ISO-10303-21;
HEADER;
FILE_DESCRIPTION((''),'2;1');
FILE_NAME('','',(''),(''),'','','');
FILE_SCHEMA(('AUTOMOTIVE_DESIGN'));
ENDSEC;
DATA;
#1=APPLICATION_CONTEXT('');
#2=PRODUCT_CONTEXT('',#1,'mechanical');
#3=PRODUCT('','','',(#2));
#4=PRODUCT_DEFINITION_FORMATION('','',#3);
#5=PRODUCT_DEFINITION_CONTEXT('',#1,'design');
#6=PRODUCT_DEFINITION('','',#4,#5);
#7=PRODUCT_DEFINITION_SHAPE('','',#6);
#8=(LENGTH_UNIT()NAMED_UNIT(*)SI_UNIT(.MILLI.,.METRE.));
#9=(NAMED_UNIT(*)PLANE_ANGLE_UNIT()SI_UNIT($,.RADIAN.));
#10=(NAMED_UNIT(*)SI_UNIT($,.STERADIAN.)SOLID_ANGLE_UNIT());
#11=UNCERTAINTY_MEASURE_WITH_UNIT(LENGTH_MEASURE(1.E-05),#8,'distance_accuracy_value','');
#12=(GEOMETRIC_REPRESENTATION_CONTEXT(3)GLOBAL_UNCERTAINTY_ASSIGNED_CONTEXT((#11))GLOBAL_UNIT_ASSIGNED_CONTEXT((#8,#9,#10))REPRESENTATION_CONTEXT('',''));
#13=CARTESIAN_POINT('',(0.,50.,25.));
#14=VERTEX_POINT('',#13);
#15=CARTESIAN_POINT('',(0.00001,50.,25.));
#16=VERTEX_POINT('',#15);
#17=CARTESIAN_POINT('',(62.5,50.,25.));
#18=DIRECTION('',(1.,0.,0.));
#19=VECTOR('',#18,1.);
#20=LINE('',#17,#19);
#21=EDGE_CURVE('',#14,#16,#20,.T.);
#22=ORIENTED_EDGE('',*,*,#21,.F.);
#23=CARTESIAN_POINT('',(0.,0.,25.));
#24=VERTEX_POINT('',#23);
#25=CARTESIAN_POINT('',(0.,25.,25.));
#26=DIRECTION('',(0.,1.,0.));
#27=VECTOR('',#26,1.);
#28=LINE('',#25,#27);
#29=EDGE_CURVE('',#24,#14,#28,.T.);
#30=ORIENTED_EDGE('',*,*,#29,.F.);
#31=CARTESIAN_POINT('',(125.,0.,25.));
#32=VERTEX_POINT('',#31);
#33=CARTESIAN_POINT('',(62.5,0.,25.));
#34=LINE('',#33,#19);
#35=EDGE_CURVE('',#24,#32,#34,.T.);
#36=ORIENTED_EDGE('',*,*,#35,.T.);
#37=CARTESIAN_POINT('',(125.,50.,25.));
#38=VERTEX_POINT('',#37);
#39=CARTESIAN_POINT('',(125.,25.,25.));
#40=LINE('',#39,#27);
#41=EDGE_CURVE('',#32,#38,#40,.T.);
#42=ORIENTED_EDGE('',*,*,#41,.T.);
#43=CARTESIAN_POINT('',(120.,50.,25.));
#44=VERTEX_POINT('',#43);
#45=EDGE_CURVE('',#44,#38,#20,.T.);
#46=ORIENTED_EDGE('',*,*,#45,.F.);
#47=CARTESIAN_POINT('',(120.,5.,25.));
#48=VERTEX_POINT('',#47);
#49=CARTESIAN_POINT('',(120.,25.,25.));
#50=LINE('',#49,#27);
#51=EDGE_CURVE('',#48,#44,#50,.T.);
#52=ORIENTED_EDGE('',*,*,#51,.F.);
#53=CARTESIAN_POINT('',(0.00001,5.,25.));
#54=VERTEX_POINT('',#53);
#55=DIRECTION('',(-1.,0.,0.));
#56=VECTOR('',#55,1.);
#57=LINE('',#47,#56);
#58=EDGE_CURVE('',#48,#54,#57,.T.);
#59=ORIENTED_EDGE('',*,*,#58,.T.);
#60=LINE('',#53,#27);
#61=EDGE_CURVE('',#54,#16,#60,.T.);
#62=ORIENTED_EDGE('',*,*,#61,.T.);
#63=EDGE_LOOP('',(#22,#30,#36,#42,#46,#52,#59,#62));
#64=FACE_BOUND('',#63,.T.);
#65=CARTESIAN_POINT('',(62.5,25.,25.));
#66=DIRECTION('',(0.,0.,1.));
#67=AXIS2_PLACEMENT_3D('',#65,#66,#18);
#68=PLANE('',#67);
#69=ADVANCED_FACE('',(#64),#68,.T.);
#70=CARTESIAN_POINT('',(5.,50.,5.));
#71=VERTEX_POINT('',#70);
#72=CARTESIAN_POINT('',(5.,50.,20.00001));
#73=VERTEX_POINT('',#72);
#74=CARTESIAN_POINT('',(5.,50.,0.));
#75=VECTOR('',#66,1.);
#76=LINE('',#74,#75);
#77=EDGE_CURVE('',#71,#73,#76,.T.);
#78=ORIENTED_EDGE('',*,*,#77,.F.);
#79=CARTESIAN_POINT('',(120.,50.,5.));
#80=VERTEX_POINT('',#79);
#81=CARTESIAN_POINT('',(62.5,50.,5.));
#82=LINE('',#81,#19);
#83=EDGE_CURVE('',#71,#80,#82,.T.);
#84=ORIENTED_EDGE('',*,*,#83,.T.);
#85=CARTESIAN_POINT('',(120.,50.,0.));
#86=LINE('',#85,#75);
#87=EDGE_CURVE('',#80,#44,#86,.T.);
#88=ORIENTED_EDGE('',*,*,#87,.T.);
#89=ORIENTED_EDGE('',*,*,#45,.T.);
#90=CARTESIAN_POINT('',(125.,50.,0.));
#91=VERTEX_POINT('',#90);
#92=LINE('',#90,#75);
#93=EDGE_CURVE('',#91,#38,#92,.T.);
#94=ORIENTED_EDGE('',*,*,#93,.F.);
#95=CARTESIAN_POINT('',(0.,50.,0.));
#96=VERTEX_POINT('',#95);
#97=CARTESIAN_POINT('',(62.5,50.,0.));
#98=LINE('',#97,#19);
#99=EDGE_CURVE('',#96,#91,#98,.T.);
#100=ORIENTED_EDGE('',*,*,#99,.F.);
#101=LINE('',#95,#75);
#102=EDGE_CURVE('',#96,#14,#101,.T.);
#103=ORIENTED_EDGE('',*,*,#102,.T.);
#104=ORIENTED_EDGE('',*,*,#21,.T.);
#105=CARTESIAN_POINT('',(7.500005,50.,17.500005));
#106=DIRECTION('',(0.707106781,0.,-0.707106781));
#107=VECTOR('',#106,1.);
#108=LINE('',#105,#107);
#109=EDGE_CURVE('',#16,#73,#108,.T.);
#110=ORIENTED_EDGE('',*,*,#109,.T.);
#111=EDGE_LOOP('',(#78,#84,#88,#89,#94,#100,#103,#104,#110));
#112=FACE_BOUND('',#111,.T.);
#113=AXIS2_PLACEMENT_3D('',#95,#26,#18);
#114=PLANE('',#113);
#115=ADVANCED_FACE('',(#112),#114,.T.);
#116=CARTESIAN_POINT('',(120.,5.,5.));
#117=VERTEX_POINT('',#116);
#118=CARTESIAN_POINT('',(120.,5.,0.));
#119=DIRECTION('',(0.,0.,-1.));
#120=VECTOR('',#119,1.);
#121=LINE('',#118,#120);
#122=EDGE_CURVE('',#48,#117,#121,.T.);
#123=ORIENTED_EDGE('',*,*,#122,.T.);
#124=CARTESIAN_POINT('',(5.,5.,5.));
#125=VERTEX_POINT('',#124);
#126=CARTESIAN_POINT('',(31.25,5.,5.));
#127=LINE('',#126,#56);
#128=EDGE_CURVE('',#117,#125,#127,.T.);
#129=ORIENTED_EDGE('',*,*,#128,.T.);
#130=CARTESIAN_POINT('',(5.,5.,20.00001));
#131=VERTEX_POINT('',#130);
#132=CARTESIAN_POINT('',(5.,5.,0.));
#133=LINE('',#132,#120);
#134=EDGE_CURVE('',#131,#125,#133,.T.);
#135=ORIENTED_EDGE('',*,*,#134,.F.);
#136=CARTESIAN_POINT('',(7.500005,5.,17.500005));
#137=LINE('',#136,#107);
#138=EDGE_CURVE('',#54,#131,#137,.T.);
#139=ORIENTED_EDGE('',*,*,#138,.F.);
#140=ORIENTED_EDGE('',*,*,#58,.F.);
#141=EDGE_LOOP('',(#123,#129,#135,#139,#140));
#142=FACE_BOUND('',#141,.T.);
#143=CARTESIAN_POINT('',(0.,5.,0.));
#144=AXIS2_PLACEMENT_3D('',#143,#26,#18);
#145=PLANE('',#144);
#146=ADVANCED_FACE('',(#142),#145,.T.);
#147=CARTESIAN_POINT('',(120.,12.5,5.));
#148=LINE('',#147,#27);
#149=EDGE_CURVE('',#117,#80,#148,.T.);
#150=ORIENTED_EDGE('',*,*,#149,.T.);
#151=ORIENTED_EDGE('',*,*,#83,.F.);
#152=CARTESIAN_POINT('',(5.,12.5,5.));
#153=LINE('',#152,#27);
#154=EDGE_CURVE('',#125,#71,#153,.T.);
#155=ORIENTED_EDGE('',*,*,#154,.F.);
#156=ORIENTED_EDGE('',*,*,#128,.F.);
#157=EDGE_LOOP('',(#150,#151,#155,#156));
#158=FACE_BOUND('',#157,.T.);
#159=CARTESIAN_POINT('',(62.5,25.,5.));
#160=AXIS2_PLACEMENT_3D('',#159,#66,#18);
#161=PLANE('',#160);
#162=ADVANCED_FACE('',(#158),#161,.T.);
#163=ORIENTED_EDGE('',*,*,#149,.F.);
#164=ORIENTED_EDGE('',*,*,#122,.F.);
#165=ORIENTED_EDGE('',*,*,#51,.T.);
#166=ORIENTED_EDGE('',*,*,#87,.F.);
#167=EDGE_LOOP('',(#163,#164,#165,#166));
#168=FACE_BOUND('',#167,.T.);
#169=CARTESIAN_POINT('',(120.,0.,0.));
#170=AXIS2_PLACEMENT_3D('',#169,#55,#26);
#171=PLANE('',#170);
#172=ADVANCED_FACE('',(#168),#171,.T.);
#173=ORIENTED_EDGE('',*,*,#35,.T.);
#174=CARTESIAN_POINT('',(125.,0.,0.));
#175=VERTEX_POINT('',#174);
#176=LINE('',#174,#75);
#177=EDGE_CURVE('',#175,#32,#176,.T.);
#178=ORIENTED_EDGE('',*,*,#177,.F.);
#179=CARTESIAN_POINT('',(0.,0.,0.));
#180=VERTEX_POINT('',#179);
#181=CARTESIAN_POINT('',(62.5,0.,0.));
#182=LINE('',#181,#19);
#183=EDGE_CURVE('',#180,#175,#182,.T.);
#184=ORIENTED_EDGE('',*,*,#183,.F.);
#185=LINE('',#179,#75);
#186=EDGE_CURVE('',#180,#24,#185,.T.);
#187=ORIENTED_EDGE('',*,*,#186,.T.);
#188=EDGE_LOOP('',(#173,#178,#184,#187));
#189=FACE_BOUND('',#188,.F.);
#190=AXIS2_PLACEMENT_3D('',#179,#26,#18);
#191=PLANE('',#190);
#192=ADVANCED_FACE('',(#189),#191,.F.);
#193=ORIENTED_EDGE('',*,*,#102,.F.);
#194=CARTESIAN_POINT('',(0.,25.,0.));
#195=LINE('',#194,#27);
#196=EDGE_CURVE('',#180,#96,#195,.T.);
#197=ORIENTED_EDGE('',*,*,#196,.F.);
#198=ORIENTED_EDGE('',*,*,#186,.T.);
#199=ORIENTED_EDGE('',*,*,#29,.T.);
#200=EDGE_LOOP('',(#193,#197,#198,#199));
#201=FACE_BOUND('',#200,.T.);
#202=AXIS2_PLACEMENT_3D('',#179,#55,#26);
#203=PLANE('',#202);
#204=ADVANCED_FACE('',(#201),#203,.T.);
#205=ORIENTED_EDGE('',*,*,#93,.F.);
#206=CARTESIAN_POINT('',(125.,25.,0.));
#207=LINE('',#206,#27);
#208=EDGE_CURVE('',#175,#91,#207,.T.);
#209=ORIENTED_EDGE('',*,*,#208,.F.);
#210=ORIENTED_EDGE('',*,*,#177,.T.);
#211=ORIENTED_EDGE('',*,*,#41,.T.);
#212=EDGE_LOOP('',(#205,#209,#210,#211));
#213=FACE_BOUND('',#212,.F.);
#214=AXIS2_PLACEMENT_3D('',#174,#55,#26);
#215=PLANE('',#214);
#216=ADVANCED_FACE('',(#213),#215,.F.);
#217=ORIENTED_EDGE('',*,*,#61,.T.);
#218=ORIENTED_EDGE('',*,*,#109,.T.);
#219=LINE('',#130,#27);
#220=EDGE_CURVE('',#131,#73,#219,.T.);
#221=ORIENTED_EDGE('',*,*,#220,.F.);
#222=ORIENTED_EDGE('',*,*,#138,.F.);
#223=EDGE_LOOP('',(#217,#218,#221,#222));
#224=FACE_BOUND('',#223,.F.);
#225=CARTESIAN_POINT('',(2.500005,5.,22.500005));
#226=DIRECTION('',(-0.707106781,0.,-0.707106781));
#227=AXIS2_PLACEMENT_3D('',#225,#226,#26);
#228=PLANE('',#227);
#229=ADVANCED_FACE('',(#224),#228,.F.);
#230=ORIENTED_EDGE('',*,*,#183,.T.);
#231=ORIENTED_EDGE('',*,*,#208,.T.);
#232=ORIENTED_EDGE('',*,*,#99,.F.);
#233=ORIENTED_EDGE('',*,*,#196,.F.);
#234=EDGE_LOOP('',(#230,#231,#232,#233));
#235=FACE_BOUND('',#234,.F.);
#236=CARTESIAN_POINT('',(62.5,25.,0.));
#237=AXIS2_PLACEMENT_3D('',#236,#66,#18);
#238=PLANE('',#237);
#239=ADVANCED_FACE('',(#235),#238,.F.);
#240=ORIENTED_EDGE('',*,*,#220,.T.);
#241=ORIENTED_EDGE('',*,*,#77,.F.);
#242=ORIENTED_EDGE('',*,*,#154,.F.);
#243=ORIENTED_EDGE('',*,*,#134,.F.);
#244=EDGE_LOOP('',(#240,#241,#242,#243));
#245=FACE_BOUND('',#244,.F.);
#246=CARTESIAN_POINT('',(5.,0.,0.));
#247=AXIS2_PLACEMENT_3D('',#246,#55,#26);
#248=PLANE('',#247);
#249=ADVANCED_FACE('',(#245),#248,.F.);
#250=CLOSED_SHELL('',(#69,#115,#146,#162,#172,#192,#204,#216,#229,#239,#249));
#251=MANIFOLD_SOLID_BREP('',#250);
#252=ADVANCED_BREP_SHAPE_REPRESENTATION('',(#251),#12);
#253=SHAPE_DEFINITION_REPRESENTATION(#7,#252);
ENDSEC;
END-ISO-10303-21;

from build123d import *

# Parameters (mm, degrees)
F0_W     = 125
F0_H     = 50
F1_DEPTH = 25
F2_T     = -5
F3_SIZE  = 4.99999


# Not quite as in the source:
# - a fillet or chamfer is up to 0.001 mm smaller than in the source, because OpenCascade refuses the exact size


with BuildPart() as f1:
    # F0 (on Top) → F1 (new body)
    with BuildSketch(Plane.XY):
        with Locations((62.5, 25)):
            Rectangle(F0_W, F0_H)
    extrude(amount=F1_DEPTH)

    # F2
    f2_openings = [f1.faces().sort_by_distance(p)[0] for p in [
        (62.5, 25, 25),
        (62.5, 50, 12.5),
    ]]
    offset(amount=F2_T, openings=f2_openings)

    # F3 (size 5 in the source; OpenCascade refuses exactly that, so slightly less here)
    f3_edges = [f1.edges().sort_by_distance(p)[0] for p in [
        (5, 27.5, 25),
    ]]
    chamfer(f3_edges, length=F3_SIZE)


solid = f1.part
